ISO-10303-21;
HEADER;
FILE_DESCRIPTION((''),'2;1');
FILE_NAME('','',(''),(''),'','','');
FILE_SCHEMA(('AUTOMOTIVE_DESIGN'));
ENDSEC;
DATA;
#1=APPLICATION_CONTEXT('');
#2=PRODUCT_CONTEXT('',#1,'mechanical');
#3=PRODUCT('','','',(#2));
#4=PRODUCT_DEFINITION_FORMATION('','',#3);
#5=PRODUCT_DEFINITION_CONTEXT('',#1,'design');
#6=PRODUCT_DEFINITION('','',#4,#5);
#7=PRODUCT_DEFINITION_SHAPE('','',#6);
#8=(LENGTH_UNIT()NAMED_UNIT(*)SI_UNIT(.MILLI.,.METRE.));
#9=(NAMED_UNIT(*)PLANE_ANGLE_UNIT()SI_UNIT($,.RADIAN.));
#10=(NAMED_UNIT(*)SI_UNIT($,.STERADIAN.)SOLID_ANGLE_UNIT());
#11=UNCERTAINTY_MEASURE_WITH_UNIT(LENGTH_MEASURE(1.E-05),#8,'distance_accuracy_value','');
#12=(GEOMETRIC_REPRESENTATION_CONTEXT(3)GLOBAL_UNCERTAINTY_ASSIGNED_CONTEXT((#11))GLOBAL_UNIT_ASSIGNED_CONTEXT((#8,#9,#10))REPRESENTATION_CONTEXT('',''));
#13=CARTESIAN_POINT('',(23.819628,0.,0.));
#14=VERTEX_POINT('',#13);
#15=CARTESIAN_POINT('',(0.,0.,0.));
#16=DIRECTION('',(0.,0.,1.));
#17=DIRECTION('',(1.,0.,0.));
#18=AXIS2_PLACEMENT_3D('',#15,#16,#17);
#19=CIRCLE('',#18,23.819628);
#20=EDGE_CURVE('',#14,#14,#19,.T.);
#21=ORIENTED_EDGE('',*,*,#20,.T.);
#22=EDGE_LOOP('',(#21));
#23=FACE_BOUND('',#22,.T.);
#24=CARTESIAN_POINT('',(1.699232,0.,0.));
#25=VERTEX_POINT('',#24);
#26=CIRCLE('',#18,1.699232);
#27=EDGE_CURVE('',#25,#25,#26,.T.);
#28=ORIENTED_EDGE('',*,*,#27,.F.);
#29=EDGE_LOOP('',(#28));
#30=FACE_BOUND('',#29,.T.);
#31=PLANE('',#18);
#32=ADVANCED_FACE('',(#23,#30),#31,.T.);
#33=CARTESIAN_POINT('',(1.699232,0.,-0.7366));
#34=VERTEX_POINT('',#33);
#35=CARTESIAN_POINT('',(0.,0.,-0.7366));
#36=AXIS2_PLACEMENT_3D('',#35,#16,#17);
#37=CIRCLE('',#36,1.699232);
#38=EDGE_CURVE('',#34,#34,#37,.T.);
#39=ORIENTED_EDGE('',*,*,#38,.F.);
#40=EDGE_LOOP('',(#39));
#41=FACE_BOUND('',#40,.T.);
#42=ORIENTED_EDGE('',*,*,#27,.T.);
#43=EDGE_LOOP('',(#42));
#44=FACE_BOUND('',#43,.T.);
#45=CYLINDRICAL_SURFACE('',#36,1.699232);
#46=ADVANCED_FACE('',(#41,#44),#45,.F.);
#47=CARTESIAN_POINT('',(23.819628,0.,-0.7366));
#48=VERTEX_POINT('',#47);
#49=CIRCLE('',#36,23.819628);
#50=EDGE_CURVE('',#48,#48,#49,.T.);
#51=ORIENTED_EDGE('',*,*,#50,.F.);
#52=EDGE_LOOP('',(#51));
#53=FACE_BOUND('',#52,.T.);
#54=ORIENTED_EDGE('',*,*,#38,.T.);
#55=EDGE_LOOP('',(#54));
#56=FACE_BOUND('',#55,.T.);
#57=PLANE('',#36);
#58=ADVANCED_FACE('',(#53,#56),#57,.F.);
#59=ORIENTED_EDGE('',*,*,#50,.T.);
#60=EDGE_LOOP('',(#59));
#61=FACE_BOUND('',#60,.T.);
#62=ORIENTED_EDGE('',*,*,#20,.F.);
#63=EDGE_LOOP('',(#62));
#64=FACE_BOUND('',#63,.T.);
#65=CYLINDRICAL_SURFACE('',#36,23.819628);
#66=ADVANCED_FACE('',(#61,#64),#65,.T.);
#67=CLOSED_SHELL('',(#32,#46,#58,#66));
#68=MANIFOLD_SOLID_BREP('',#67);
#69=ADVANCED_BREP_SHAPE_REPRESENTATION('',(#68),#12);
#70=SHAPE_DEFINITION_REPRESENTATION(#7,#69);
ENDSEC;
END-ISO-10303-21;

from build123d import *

# Parameters (mm, degrees)
SKETCH11_R         = 23.819627694
SKETCH11_R_2       = 1.699231601
BASE_FLANGE2_DEPTH = 0.7366


# Sheet-metal steps are written as plain solids
with BuildPart() as part:
    # Sketch11 → Base-Flange2 (new body)
    with BuildSketch(Plane.XY):
        Circle(SKETCH11_R)
        Circle(SKETCH11_R_2, mode=Mode.SUBTRACT)
    extrude(amount=-BASE_FLANGE2_DEPTH)


solid = part.part
